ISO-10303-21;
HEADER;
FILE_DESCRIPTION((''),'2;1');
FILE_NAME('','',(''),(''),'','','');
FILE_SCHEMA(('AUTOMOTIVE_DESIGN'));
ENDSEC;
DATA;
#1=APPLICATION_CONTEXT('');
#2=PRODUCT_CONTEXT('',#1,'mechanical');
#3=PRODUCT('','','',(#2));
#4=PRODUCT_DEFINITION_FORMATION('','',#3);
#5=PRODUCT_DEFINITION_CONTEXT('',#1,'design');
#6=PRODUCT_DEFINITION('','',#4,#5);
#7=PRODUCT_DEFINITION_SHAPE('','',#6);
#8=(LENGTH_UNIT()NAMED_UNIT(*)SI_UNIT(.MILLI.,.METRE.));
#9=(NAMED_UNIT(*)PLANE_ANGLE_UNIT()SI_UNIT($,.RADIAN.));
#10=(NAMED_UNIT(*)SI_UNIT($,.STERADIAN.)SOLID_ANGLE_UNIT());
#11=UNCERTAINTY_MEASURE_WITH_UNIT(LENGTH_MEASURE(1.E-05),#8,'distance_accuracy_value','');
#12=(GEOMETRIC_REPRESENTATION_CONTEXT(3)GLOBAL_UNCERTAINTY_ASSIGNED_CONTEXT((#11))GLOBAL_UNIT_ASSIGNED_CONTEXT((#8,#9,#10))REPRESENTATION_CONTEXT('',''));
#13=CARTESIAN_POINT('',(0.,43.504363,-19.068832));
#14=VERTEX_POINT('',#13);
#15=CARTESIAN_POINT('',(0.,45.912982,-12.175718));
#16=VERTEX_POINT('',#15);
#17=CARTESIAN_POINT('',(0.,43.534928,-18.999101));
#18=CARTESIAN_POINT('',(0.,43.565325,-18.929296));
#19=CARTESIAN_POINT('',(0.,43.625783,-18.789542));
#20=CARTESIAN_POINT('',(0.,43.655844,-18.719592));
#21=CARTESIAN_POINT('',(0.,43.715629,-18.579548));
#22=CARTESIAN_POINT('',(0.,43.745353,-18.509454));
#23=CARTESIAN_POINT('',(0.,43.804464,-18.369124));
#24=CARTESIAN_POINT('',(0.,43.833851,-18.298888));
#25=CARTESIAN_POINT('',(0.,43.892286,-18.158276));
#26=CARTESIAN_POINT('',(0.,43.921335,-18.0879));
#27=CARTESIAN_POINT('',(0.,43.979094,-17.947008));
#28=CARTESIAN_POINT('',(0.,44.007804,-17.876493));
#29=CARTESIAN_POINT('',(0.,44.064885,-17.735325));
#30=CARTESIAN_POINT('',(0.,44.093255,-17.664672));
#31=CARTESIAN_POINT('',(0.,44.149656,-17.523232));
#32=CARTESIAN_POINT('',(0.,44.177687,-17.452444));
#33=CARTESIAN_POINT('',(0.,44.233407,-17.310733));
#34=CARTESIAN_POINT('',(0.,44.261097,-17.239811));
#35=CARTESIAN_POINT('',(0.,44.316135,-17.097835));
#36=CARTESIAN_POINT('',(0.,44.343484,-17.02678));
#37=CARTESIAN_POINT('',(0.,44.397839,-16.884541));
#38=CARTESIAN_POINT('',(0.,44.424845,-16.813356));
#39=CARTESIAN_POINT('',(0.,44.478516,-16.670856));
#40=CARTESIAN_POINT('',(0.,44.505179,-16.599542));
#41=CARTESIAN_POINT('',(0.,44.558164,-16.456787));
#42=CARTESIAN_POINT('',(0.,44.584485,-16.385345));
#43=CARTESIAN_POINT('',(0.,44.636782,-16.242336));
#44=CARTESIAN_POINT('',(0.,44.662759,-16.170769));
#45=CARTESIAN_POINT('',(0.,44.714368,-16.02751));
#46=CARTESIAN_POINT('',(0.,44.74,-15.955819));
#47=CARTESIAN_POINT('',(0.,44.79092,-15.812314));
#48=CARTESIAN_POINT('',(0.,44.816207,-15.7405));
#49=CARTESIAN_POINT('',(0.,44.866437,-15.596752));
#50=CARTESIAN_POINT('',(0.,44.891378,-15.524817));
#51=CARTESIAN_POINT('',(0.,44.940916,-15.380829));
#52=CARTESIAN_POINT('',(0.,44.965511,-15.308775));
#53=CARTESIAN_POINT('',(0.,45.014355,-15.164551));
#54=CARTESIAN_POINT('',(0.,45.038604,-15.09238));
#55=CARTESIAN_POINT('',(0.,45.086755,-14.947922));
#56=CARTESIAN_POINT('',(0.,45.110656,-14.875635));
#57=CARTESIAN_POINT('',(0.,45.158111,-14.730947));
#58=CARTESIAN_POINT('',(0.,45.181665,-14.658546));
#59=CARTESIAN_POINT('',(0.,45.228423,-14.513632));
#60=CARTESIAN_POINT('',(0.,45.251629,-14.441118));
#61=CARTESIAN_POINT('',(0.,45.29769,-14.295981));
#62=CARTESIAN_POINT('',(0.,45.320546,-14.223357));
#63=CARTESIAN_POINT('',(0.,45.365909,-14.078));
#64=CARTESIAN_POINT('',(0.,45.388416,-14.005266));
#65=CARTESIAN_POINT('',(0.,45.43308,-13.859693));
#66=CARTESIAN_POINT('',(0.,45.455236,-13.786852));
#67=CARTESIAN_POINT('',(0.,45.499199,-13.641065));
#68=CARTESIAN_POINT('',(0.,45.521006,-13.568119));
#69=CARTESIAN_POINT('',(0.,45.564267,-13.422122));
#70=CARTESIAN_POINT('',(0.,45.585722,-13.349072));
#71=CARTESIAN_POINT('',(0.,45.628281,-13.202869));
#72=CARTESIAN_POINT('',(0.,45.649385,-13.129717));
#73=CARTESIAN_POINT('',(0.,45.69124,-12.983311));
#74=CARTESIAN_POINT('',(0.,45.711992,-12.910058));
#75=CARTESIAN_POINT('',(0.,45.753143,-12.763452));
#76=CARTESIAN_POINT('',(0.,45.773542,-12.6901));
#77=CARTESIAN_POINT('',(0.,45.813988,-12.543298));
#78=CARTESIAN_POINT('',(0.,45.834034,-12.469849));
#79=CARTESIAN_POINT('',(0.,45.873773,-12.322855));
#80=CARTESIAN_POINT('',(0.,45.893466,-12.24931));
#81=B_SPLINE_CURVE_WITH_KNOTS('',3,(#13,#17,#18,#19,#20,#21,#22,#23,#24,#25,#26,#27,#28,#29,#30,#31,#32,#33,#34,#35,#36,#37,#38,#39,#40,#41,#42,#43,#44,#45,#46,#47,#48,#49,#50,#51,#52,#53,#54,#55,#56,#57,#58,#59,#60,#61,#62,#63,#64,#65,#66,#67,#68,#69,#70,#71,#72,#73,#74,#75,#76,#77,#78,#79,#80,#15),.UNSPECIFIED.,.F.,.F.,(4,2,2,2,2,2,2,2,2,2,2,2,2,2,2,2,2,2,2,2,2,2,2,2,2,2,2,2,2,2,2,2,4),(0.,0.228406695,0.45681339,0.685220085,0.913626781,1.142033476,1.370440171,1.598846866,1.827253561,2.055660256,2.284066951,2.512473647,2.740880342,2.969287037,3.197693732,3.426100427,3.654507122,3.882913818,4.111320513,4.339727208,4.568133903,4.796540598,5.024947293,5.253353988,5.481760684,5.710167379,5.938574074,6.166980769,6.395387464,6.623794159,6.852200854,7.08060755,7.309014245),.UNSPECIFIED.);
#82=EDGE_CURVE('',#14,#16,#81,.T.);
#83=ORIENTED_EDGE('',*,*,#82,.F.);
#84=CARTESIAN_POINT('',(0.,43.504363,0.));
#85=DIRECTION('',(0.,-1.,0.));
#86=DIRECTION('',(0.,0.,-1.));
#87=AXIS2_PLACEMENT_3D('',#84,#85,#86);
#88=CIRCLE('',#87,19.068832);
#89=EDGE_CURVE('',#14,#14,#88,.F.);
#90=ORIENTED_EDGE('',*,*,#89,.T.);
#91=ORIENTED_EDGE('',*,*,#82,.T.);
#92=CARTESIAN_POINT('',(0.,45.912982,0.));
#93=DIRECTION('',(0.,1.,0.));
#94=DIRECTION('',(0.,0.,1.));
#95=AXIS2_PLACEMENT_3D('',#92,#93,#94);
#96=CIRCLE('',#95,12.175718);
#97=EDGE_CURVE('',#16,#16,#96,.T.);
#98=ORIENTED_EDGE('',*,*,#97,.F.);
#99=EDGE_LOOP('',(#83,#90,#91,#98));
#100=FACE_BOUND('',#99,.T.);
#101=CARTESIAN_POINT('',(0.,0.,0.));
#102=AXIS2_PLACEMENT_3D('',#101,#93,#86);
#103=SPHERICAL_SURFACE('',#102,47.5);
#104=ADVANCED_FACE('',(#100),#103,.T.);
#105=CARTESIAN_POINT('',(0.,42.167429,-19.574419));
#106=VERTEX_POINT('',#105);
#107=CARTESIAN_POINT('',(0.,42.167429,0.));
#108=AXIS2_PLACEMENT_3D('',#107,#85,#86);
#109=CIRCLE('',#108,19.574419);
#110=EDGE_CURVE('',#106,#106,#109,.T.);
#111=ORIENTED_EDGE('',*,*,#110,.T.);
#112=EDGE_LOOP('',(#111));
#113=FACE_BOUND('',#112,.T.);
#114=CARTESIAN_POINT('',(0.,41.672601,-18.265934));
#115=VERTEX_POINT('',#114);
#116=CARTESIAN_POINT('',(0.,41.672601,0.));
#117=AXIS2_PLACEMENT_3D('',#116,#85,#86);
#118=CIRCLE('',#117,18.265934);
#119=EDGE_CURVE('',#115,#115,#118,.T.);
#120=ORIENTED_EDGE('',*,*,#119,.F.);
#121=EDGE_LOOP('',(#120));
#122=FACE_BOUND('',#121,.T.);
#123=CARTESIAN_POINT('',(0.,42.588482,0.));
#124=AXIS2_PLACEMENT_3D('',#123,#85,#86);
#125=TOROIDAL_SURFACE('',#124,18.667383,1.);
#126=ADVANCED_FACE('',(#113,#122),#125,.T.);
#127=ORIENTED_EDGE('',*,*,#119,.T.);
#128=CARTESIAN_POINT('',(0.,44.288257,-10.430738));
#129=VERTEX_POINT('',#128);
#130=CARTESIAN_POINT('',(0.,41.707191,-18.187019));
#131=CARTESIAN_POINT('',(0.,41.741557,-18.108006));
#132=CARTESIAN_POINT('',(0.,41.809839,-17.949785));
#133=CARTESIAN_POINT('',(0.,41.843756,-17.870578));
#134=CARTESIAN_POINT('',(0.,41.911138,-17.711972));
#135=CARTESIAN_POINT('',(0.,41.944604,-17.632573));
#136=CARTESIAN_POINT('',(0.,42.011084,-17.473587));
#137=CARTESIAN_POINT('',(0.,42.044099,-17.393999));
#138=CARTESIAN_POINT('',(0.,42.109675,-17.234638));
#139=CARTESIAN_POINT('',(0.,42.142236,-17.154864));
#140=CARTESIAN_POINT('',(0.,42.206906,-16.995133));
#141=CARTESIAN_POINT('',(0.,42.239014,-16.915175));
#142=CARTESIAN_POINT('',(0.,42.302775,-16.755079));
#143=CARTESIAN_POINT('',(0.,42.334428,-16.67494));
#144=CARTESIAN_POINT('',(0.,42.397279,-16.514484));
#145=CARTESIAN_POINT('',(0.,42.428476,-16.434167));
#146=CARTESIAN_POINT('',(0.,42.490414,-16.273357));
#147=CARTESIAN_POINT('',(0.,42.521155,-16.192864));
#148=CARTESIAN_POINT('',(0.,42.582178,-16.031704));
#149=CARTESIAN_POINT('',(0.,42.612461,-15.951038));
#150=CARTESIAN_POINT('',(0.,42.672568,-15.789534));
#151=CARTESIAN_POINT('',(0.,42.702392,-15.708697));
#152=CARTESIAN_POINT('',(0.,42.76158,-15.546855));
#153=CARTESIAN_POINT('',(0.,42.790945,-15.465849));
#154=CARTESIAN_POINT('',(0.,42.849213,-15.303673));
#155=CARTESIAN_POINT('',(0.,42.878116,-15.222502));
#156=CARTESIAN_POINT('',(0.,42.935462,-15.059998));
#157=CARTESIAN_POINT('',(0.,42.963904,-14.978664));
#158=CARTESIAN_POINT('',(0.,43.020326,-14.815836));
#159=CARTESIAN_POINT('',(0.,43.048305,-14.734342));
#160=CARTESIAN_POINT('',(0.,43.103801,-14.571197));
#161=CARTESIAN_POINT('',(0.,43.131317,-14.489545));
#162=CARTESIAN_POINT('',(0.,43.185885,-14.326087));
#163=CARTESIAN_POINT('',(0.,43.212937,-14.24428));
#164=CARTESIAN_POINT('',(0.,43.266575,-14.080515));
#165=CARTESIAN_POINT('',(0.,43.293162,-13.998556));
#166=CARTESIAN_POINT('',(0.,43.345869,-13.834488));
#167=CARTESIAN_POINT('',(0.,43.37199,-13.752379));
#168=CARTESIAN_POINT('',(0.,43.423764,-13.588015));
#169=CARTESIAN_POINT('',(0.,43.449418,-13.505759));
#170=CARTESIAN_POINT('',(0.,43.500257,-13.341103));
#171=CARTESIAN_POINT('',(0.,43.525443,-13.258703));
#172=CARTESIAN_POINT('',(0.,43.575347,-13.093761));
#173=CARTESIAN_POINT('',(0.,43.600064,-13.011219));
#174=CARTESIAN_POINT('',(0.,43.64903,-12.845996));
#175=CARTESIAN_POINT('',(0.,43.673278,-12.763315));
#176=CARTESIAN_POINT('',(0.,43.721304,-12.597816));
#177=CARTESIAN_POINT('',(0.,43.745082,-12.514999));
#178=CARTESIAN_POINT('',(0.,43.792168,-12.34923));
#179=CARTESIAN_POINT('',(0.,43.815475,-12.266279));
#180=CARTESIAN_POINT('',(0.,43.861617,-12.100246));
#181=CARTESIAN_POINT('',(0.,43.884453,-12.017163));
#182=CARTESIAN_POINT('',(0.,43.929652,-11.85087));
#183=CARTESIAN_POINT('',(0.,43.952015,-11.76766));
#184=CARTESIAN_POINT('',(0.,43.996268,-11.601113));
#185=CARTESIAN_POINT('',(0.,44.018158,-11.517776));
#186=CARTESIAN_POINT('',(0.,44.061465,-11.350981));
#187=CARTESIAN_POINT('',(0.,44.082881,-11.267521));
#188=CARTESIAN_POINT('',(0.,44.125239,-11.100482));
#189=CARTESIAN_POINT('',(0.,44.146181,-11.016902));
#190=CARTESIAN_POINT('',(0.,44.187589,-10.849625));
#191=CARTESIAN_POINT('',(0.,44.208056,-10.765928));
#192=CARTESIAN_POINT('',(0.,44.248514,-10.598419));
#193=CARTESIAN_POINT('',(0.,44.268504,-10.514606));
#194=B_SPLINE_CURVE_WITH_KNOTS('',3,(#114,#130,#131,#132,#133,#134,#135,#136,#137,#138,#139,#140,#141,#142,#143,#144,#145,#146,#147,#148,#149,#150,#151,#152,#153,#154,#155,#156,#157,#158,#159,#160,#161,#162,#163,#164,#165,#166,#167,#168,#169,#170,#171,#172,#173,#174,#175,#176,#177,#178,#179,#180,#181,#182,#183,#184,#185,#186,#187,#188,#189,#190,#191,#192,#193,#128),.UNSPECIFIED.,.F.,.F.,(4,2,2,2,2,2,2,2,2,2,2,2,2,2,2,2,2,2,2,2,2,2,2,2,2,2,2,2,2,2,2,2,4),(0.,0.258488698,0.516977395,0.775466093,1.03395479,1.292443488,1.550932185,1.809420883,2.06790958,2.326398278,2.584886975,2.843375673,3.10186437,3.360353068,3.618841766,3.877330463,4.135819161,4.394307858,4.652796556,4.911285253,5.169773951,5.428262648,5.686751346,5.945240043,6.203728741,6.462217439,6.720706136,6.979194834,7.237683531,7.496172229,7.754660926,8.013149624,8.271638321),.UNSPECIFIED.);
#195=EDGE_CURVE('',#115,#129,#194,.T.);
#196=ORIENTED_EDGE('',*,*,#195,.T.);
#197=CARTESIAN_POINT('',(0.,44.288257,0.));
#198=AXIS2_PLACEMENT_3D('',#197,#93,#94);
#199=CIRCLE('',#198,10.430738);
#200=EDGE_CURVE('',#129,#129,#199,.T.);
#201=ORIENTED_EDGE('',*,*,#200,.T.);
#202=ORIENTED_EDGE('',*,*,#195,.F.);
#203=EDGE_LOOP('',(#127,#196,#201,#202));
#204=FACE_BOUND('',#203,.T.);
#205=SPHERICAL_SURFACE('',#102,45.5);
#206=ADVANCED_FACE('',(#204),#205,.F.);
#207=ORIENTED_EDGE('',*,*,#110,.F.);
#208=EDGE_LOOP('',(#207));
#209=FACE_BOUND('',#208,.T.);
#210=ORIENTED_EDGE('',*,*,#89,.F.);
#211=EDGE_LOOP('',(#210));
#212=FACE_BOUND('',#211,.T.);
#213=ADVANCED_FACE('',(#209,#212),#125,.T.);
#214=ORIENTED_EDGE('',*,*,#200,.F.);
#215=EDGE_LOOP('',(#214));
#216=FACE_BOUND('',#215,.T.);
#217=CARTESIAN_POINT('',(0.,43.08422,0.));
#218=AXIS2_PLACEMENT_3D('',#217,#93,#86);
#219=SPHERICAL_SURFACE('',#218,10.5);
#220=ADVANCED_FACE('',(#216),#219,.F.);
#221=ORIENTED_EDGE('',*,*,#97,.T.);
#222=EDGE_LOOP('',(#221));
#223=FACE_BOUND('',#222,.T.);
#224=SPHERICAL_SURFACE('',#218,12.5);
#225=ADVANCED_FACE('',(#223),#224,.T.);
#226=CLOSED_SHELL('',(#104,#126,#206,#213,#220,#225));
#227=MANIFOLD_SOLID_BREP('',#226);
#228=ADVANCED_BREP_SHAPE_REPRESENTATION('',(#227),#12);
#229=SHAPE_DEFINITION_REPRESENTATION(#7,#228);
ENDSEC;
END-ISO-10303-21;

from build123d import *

# Parameters (mm, degrees)
FILLET1_R = 1


with BuildPart() as part:
    # Sketch2 → Revolve2 (revolve)
    with BuildSketch(Plane(origin=(0, 0, 0), x_dir=(0, 0, -1), z_dir=(1, 0, 0))):
        with BuildLine():
            Line((20, 43.084219849), (19.157894737, 41.270147434))
            ThreePointArc((19.157894737, 41.270147434), (14.87108075, 43.001173906), (10.430737971, 44.288256969))
            ThreePointArc((10.430737971, 44.288256969), (6.985972024, 50.92298218), (0, 53.584219849))
            Line((0, 53.584219849), (0, 55.584219849))
            ThreePointArc((0, 55.584219849), (7.774653566, 52.872210549), (12.175717887, 45.912981758))
            ThreePointArc((12.175717887, 45.912981758), (16.149912658, 44.67023977), (20, 43.084219849))
        make_face()
    revolve(axis=Axis((0, 55.584219849, 0), (0, -1, 0)))

    # Fillet1
    fillet1_edges = [part.edges().sort_by_distance(p)[0] for p in [
        (0, 43.084219849, 20),
        (0, 41.270147434, 19.157894737),
    ]]
    fillet(fillet1_edges, radius=FILLET1_R - 0.0001)  # a hair under: the kernel refuses the full size


solid = part.part
